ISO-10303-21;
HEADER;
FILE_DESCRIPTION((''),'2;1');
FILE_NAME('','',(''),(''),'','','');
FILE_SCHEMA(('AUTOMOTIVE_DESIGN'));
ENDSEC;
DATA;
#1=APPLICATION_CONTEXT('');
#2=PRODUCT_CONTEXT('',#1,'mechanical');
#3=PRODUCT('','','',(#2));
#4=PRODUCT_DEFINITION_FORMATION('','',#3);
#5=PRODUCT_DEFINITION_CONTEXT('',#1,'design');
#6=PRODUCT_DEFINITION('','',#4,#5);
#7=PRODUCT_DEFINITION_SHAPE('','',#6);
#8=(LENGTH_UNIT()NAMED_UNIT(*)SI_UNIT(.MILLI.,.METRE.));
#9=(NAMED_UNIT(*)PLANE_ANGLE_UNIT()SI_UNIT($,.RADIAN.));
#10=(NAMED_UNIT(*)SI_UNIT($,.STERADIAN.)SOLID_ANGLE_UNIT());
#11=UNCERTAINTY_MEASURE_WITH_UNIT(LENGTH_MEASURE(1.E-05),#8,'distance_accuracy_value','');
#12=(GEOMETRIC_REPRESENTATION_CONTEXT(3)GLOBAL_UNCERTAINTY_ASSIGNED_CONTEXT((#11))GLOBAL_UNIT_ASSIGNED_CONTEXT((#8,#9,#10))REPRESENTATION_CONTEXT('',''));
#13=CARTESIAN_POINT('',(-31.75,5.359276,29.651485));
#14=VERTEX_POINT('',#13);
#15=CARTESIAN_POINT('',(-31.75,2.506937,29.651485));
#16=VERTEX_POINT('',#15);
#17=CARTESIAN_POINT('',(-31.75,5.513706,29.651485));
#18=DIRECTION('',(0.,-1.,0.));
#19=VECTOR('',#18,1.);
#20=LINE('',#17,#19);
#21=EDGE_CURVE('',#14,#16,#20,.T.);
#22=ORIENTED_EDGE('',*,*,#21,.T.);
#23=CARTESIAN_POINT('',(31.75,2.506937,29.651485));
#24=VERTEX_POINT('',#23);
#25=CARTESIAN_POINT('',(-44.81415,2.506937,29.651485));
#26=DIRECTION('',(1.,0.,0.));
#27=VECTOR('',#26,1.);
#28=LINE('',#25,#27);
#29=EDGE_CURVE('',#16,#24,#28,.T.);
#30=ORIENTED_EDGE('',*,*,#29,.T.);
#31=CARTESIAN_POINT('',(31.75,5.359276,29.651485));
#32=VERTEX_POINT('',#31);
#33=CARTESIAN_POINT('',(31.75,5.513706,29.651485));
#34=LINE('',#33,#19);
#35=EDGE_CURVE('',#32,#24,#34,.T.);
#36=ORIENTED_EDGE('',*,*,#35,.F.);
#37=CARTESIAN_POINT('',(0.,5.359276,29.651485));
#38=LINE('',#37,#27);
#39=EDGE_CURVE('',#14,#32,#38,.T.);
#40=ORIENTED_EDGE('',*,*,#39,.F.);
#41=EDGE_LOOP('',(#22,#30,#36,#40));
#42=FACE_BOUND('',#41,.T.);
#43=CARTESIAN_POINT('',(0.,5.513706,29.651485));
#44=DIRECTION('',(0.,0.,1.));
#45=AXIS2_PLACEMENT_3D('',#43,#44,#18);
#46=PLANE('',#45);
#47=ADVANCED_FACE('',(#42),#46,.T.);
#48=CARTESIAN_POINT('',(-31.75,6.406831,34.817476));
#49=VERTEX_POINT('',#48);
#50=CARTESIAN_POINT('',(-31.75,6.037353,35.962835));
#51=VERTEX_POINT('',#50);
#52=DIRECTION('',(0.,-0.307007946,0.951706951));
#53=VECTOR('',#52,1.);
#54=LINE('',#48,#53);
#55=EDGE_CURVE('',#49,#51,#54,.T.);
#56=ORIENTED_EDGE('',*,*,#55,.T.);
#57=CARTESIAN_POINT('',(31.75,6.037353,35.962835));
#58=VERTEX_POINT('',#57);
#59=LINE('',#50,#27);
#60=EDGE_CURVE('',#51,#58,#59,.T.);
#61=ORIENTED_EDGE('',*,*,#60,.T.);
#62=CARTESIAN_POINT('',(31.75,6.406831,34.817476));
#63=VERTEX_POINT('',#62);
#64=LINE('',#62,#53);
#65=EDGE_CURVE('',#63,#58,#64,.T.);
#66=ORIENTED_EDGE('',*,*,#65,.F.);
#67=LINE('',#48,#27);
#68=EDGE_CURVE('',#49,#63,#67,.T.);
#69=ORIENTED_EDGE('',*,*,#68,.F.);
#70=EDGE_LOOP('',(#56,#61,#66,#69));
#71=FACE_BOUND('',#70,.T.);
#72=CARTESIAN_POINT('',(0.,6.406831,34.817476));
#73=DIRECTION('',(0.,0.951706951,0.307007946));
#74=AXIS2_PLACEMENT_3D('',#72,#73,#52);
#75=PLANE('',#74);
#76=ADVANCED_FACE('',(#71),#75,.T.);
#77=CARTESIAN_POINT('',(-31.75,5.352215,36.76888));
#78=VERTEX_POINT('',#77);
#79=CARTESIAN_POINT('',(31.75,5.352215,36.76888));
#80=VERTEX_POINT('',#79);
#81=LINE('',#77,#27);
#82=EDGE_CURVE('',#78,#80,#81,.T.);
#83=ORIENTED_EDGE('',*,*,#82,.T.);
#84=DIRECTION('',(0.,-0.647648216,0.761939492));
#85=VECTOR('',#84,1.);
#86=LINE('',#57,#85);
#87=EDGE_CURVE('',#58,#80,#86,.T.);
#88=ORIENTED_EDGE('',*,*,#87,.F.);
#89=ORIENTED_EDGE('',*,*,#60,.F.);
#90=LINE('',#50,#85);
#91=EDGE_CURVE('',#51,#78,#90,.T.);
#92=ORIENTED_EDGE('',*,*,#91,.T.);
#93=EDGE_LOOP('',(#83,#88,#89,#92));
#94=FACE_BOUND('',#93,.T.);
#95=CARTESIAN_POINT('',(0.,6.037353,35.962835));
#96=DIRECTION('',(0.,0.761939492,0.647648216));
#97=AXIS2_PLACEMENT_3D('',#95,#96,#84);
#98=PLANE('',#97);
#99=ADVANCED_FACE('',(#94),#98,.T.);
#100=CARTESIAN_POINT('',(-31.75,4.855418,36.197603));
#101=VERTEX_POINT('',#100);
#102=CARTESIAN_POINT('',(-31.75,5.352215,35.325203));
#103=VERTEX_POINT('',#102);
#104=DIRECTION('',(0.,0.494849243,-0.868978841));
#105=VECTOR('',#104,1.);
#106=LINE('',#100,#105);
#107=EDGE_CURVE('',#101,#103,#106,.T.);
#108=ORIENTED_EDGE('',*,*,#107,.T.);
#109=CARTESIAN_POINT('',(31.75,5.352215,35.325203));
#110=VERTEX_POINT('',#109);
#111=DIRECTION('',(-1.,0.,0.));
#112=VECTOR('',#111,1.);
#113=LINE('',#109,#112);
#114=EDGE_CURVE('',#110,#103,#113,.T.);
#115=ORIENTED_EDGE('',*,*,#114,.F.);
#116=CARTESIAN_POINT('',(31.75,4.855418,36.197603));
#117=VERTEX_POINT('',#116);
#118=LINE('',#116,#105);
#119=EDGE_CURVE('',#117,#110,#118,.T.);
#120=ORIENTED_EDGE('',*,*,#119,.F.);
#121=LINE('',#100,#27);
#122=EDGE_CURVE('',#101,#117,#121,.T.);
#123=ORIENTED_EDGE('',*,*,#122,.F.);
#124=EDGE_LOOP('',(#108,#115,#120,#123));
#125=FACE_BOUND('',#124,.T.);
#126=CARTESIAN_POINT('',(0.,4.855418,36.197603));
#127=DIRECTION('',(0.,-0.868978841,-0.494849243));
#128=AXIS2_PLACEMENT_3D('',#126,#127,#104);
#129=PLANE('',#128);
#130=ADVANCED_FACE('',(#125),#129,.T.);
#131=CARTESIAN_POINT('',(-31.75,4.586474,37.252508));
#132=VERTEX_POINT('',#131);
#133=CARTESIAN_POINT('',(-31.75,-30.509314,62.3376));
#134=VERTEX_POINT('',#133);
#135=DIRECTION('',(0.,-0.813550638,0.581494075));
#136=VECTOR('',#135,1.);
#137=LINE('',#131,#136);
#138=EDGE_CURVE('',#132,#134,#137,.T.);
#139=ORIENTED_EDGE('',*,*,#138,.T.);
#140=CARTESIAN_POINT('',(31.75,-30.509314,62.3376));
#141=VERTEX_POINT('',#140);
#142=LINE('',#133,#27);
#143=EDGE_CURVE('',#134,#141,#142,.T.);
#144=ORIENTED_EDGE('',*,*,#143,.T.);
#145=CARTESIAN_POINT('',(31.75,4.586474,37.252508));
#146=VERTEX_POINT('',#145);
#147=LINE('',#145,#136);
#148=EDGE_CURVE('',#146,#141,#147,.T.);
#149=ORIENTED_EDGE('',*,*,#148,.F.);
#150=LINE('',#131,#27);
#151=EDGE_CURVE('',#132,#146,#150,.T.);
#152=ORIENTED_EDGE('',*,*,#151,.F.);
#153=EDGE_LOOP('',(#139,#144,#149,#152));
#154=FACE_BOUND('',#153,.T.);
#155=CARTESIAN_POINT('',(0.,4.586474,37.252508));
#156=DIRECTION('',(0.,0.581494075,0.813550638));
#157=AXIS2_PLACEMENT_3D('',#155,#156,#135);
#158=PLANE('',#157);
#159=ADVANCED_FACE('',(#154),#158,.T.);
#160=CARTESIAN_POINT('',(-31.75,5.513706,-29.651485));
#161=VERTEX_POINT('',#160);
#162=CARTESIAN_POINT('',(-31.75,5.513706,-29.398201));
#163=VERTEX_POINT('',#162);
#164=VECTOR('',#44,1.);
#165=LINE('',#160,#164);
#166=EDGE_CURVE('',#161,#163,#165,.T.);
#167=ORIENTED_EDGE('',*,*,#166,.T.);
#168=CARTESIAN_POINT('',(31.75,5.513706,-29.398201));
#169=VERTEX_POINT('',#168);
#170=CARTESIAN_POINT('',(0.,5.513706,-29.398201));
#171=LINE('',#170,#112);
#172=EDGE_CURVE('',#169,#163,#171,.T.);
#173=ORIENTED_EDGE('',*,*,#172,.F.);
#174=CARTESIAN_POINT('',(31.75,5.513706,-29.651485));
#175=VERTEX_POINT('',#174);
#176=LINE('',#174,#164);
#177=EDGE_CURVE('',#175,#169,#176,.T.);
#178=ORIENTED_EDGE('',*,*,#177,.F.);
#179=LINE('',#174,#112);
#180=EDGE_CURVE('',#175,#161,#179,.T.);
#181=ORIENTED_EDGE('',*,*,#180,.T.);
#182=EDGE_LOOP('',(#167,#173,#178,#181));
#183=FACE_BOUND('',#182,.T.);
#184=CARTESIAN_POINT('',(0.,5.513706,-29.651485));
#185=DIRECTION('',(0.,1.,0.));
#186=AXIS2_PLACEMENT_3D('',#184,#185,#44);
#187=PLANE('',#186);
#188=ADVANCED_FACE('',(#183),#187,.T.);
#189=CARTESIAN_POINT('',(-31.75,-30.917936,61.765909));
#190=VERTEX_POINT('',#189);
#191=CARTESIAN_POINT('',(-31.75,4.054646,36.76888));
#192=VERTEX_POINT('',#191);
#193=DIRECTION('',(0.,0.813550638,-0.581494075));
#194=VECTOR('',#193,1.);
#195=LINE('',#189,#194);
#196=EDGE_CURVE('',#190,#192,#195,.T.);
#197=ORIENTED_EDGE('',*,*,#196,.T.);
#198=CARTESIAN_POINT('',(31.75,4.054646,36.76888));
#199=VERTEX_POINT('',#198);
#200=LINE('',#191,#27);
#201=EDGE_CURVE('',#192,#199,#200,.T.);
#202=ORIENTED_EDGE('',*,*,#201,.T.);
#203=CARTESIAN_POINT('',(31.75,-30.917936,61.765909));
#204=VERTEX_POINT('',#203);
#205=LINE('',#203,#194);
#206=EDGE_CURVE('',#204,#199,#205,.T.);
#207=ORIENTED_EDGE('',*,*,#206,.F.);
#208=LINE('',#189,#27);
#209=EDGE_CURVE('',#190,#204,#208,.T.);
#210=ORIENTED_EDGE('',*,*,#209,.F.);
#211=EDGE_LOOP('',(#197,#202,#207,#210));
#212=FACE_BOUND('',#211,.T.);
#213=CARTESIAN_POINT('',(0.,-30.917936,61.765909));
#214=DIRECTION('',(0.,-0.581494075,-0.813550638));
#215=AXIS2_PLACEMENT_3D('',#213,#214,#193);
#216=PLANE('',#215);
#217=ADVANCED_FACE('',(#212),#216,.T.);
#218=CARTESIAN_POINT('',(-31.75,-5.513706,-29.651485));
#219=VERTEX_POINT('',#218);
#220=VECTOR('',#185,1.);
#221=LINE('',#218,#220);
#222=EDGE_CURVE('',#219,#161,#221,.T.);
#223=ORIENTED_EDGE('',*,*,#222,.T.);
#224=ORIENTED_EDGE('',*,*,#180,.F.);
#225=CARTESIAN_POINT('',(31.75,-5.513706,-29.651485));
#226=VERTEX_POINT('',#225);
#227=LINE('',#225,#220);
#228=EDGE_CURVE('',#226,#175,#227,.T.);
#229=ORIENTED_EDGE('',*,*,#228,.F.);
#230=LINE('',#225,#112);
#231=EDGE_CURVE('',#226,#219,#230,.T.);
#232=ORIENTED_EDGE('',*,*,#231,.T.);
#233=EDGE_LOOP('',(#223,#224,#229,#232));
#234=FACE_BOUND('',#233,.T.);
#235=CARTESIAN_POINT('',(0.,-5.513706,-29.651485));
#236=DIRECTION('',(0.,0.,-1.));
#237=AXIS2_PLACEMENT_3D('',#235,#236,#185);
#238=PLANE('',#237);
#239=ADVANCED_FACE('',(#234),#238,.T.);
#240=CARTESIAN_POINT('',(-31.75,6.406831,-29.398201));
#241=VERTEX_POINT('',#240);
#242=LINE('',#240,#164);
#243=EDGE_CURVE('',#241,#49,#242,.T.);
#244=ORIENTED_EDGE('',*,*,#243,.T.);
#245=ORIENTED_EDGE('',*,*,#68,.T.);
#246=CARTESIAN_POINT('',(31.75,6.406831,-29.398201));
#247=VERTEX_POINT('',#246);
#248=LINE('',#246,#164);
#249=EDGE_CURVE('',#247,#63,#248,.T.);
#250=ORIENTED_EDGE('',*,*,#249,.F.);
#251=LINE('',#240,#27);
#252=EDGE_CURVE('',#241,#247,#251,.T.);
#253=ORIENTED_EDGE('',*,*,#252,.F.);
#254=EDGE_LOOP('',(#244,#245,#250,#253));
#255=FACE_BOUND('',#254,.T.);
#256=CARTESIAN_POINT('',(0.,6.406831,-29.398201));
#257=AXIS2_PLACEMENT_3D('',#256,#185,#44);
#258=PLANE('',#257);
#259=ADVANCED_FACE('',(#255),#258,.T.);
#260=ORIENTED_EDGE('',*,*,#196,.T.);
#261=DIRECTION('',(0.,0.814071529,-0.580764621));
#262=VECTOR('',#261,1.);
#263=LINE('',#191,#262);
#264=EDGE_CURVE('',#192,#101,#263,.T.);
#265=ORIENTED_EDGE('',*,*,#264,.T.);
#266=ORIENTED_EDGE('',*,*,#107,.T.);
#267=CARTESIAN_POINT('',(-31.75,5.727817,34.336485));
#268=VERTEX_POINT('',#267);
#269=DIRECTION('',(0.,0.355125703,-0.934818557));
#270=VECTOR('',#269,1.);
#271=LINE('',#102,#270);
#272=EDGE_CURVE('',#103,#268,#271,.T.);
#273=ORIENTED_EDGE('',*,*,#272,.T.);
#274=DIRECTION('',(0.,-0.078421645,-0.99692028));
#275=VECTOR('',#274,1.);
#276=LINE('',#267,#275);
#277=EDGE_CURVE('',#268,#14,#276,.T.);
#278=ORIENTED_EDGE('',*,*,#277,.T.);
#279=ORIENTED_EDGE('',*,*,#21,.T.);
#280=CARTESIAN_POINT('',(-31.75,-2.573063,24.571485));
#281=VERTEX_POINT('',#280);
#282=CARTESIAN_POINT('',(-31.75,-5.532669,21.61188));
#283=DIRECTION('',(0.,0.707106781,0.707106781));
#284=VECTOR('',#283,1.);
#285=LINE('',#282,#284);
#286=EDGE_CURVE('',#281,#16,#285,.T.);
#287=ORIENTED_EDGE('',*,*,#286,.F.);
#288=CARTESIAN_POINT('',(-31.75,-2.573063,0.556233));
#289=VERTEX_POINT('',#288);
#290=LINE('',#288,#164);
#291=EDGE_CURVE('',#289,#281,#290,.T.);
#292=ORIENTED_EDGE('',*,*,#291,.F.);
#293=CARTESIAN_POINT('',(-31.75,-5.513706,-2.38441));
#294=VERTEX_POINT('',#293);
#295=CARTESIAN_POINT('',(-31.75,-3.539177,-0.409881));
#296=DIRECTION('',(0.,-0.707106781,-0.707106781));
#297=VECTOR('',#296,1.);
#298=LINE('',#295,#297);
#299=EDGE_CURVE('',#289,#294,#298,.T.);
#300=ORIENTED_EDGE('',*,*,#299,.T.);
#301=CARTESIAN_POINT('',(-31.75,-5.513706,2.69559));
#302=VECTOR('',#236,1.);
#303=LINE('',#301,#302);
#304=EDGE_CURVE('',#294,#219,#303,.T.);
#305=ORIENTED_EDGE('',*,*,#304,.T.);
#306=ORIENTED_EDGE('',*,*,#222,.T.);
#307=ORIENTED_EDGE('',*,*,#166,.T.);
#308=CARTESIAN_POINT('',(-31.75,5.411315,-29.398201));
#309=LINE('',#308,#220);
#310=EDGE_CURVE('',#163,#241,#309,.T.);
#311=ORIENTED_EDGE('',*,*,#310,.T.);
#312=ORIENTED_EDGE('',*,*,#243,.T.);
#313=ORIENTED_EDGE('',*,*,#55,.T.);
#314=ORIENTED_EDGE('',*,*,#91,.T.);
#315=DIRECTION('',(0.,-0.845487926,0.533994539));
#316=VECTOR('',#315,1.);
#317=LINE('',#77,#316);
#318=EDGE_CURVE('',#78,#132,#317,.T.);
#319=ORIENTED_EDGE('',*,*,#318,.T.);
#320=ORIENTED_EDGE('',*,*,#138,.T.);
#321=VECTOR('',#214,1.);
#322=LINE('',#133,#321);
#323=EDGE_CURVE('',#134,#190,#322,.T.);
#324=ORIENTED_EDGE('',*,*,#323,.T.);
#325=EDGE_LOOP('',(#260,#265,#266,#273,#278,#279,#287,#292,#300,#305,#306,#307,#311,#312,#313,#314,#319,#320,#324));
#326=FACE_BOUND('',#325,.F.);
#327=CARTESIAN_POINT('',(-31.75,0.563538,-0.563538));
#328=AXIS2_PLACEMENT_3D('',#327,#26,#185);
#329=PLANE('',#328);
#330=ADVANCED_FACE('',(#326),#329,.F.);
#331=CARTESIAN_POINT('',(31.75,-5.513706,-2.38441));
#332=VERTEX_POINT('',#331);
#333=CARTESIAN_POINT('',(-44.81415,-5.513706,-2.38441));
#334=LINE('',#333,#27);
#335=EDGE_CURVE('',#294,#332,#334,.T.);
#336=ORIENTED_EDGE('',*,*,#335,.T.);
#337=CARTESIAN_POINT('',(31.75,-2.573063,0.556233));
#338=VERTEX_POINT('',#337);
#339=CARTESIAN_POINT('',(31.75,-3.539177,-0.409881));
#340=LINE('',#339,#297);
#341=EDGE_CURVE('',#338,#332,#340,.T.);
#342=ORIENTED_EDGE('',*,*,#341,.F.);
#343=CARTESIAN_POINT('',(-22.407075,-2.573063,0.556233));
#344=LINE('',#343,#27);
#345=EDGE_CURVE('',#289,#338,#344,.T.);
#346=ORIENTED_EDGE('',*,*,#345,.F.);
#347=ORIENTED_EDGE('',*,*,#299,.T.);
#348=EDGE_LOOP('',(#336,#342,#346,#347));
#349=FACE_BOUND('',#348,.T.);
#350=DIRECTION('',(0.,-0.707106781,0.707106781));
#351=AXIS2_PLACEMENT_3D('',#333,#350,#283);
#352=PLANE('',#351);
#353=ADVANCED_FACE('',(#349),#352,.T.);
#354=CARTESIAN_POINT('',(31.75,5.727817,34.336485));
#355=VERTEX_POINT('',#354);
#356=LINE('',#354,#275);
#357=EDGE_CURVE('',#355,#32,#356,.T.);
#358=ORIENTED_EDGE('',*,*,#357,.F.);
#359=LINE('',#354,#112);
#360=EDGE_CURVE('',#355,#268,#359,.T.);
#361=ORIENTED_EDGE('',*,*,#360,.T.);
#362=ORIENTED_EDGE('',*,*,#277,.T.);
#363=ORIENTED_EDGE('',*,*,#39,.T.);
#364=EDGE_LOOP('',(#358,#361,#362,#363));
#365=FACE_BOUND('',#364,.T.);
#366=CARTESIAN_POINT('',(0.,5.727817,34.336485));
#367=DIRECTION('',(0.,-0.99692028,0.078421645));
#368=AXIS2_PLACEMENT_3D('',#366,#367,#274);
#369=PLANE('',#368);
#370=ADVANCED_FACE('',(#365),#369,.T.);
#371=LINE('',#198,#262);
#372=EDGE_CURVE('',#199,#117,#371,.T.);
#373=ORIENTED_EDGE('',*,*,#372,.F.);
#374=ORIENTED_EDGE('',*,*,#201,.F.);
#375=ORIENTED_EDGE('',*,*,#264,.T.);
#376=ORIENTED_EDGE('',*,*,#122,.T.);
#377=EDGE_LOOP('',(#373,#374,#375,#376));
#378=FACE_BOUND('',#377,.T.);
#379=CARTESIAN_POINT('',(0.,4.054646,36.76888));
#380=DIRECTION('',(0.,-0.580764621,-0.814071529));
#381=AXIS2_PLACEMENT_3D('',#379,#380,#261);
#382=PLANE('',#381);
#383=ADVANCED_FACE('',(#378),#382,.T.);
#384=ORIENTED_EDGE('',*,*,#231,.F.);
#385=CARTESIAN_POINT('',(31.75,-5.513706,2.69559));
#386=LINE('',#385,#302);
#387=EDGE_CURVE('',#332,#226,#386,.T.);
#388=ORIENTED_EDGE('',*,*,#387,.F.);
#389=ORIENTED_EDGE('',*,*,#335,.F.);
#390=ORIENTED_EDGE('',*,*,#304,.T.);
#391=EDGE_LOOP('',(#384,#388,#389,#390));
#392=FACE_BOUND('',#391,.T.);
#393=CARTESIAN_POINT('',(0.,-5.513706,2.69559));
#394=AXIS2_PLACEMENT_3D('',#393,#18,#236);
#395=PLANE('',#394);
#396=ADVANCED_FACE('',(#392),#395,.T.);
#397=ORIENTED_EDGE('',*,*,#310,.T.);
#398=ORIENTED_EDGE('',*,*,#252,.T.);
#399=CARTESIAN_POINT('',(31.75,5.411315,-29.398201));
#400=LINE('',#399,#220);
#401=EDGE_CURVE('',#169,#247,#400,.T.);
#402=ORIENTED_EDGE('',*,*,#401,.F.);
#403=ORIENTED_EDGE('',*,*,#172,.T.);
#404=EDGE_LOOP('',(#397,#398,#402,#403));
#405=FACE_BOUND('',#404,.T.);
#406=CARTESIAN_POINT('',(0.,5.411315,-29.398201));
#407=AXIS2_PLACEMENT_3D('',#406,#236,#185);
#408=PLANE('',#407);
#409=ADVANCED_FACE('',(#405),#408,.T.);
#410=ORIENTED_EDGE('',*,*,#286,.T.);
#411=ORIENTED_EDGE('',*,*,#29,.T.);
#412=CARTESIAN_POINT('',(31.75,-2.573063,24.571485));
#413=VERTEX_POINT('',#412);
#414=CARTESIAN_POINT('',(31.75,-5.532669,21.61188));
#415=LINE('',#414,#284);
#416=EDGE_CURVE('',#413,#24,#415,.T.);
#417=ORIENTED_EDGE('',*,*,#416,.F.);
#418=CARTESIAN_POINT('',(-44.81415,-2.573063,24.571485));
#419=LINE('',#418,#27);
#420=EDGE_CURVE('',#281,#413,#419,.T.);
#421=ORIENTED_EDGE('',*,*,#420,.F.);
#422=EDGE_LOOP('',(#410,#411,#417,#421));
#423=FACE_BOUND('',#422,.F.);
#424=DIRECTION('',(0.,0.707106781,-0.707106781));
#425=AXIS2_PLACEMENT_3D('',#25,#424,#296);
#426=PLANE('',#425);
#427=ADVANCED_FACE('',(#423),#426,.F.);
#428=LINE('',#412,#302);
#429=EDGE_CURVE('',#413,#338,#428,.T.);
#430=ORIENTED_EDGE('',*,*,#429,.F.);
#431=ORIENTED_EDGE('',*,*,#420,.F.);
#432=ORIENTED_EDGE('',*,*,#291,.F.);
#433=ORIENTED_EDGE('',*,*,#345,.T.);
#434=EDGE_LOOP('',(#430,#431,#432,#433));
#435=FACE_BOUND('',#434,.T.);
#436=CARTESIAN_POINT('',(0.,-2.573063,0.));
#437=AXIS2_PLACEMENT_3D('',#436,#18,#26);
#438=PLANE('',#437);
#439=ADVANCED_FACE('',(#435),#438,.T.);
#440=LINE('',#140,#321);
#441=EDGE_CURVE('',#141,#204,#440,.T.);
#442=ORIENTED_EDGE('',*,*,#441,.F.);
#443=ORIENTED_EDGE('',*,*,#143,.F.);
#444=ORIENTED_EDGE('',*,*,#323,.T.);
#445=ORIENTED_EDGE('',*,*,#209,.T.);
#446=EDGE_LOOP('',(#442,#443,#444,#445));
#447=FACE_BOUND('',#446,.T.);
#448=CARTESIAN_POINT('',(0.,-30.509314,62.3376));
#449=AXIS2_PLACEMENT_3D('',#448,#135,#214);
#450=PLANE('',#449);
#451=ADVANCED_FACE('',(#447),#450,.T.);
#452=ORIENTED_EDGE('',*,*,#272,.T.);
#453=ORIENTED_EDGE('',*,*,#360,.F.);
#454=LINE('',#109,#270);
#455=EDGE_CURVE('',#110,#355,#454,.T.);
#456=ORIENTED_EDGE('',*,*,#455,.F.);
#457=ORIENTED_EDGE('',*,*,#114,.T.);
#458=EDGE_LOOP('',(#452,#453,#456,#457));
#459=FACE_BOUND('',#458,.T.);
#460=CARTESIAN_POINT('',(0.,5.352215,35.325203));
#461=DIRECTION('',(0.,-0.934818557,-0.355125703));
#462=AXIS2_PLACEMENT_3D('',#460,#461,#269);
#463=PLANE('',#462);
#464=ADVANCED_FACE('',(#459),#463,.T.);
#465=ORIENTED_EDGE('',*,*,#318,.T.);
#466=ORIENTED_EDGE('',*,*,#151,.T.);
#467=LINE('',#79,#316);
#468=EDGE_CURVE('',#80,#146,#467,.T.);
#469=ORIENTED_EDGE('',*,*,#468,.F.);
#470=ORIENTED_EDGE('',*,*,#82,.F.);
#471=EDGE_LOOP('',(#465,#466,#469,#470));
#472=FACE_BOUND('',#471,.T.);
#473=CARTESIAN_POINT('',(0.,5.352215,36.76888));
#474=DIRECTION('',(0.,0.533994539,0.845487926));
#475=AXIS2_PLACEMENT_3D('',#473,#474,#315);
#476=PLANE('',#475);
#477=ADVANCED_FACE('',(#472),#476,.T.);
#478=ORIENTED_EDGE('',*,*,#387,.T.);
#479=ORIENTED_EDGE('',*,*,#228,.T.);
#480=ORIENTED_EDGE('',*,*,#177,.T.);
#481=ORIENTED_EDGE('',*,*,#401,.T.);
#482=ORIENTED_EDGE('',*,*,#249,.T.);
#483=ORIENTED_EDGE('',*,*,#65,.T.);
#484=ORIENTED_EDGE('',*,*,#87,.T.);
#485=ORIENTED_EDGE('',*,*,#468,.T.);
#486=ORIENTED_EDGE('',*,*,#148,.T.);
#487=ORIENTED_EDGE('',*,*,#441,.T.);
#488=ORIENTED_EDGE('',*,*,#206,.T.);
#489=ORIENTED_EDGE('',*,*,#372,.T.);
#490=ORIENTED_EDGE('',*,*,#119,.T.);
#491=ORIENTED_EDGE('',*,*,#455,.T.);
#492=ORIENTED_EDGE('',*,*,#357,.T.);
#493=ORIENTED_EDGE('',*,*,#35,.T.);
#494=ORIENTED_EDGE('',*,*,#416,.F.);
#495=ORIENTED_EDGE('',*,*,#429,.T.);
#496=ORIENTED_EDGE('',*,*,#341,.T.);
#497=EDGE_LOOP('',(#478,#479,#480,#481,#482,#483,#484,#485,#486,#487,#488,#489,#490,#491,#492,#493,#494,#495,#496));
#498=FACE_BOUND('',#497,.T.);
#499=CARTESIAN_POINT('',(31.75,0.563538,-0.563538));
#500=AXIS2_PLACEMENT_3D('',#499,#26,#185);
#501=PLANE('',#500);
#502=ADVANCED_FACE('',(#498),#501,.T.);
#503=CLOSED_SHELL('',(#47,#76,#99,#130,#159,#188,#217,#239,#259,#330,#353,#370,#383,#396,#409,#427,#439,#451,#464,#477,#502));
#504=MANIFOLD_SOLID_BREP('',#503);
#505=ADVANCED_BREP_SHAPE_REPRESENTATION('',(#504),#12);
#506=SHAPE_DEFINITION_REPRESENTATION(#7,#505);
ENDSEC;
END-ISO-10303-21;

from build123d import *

# Parameters (mm, degrees)
F1_DEPTH    = 31.75
F2_T1_DEPTH = 89.6282991577
F2_T6_DEPTH = 89.6282991577
F4_DEPTH    = 31.75


# Not quite as in the source:
# - a fillet or chamfer that OpenCascade refuses, or shapes differently, is made with other operations: its cross-section is extruded or revolved along the edge and cut away or added


with BuildPart() as f1:
    # F0 (on Right) → F1 (new body, symmetric)
    with BuildSketch(Plane.YZ):
        Polygon((5.5137062445, 29.6514853835), (-2.5730628986, 29.6514853835), (-2.5730628986, 2.6955895592), (-5.5137062445, 2.6955895592), (-5.5137062445, -29.6514853835), (5.5137062445, -29.6514853835), align=None)
    extrude(amount=F1_DEPTH, both=True)

    # F2: chamfer of 5.08 on 2 edges, made by hand

    # F2_s2 → F2_t1 (cut)
    with BuildSketch(Plane.YZ.offset(-44.8141495789)):
        Polygon((2.5069371014, 29.6514853835), (-2.5730628986, 24.5714853835), (-2.5730628986, 29.6514853835), align=None)
    extrude(amount=F2_T1_DEPTH, mode=Mode.SUBTRACT)


with BuildPart() as f2_tool4:
    # F2_s5 → F2_t6 (new body)
    with BuildSketch(Plane.YZ.offset(-44.8141495789)):
        Polygon((-5.5137062445, -2.3844104408), (-0.4337062445, 2.6955895592), (-5.5137062445, 2.6955895592), align=None)
    extrude(amount=F2_T6_DEPTH)

    split(bisect_by=Plane.XZ.offset(2.5730628986), keep=Keep.TOP)


with BuildPart() as f1_1:
    add(f1.part)

    # F2_t3: cut F2_tool4
    add(f2_tool4.part, mode=Mode.SUBTRACT)

    # F3 (on Right) → F4 (join, symmetric)
    with BuildSketch(Plane.YZ):
        Polygon((5.3522153758, 29.5617226511), (5.411314778, -29.3982010335), (6.4068306237, -29.3982010335), (6.4068306237, 34.8174758255), (6.0373530723, 35.9628349543), (5.3522153758, 36.7688797414), (4.586473573, 37.2525081038), (-30.5093135685, 62.3375996947), (-30.9179358327, 61.7659087381), (4.054645617, 36.7688797414), (4.8554181121, 36.1976027489), (5.3522153758, 35.3252030909), (5.7278168388, 34.3364849687), align=None)
    extrude(amount=F4_DEPTH, both=True)


solid = f1_1.part
